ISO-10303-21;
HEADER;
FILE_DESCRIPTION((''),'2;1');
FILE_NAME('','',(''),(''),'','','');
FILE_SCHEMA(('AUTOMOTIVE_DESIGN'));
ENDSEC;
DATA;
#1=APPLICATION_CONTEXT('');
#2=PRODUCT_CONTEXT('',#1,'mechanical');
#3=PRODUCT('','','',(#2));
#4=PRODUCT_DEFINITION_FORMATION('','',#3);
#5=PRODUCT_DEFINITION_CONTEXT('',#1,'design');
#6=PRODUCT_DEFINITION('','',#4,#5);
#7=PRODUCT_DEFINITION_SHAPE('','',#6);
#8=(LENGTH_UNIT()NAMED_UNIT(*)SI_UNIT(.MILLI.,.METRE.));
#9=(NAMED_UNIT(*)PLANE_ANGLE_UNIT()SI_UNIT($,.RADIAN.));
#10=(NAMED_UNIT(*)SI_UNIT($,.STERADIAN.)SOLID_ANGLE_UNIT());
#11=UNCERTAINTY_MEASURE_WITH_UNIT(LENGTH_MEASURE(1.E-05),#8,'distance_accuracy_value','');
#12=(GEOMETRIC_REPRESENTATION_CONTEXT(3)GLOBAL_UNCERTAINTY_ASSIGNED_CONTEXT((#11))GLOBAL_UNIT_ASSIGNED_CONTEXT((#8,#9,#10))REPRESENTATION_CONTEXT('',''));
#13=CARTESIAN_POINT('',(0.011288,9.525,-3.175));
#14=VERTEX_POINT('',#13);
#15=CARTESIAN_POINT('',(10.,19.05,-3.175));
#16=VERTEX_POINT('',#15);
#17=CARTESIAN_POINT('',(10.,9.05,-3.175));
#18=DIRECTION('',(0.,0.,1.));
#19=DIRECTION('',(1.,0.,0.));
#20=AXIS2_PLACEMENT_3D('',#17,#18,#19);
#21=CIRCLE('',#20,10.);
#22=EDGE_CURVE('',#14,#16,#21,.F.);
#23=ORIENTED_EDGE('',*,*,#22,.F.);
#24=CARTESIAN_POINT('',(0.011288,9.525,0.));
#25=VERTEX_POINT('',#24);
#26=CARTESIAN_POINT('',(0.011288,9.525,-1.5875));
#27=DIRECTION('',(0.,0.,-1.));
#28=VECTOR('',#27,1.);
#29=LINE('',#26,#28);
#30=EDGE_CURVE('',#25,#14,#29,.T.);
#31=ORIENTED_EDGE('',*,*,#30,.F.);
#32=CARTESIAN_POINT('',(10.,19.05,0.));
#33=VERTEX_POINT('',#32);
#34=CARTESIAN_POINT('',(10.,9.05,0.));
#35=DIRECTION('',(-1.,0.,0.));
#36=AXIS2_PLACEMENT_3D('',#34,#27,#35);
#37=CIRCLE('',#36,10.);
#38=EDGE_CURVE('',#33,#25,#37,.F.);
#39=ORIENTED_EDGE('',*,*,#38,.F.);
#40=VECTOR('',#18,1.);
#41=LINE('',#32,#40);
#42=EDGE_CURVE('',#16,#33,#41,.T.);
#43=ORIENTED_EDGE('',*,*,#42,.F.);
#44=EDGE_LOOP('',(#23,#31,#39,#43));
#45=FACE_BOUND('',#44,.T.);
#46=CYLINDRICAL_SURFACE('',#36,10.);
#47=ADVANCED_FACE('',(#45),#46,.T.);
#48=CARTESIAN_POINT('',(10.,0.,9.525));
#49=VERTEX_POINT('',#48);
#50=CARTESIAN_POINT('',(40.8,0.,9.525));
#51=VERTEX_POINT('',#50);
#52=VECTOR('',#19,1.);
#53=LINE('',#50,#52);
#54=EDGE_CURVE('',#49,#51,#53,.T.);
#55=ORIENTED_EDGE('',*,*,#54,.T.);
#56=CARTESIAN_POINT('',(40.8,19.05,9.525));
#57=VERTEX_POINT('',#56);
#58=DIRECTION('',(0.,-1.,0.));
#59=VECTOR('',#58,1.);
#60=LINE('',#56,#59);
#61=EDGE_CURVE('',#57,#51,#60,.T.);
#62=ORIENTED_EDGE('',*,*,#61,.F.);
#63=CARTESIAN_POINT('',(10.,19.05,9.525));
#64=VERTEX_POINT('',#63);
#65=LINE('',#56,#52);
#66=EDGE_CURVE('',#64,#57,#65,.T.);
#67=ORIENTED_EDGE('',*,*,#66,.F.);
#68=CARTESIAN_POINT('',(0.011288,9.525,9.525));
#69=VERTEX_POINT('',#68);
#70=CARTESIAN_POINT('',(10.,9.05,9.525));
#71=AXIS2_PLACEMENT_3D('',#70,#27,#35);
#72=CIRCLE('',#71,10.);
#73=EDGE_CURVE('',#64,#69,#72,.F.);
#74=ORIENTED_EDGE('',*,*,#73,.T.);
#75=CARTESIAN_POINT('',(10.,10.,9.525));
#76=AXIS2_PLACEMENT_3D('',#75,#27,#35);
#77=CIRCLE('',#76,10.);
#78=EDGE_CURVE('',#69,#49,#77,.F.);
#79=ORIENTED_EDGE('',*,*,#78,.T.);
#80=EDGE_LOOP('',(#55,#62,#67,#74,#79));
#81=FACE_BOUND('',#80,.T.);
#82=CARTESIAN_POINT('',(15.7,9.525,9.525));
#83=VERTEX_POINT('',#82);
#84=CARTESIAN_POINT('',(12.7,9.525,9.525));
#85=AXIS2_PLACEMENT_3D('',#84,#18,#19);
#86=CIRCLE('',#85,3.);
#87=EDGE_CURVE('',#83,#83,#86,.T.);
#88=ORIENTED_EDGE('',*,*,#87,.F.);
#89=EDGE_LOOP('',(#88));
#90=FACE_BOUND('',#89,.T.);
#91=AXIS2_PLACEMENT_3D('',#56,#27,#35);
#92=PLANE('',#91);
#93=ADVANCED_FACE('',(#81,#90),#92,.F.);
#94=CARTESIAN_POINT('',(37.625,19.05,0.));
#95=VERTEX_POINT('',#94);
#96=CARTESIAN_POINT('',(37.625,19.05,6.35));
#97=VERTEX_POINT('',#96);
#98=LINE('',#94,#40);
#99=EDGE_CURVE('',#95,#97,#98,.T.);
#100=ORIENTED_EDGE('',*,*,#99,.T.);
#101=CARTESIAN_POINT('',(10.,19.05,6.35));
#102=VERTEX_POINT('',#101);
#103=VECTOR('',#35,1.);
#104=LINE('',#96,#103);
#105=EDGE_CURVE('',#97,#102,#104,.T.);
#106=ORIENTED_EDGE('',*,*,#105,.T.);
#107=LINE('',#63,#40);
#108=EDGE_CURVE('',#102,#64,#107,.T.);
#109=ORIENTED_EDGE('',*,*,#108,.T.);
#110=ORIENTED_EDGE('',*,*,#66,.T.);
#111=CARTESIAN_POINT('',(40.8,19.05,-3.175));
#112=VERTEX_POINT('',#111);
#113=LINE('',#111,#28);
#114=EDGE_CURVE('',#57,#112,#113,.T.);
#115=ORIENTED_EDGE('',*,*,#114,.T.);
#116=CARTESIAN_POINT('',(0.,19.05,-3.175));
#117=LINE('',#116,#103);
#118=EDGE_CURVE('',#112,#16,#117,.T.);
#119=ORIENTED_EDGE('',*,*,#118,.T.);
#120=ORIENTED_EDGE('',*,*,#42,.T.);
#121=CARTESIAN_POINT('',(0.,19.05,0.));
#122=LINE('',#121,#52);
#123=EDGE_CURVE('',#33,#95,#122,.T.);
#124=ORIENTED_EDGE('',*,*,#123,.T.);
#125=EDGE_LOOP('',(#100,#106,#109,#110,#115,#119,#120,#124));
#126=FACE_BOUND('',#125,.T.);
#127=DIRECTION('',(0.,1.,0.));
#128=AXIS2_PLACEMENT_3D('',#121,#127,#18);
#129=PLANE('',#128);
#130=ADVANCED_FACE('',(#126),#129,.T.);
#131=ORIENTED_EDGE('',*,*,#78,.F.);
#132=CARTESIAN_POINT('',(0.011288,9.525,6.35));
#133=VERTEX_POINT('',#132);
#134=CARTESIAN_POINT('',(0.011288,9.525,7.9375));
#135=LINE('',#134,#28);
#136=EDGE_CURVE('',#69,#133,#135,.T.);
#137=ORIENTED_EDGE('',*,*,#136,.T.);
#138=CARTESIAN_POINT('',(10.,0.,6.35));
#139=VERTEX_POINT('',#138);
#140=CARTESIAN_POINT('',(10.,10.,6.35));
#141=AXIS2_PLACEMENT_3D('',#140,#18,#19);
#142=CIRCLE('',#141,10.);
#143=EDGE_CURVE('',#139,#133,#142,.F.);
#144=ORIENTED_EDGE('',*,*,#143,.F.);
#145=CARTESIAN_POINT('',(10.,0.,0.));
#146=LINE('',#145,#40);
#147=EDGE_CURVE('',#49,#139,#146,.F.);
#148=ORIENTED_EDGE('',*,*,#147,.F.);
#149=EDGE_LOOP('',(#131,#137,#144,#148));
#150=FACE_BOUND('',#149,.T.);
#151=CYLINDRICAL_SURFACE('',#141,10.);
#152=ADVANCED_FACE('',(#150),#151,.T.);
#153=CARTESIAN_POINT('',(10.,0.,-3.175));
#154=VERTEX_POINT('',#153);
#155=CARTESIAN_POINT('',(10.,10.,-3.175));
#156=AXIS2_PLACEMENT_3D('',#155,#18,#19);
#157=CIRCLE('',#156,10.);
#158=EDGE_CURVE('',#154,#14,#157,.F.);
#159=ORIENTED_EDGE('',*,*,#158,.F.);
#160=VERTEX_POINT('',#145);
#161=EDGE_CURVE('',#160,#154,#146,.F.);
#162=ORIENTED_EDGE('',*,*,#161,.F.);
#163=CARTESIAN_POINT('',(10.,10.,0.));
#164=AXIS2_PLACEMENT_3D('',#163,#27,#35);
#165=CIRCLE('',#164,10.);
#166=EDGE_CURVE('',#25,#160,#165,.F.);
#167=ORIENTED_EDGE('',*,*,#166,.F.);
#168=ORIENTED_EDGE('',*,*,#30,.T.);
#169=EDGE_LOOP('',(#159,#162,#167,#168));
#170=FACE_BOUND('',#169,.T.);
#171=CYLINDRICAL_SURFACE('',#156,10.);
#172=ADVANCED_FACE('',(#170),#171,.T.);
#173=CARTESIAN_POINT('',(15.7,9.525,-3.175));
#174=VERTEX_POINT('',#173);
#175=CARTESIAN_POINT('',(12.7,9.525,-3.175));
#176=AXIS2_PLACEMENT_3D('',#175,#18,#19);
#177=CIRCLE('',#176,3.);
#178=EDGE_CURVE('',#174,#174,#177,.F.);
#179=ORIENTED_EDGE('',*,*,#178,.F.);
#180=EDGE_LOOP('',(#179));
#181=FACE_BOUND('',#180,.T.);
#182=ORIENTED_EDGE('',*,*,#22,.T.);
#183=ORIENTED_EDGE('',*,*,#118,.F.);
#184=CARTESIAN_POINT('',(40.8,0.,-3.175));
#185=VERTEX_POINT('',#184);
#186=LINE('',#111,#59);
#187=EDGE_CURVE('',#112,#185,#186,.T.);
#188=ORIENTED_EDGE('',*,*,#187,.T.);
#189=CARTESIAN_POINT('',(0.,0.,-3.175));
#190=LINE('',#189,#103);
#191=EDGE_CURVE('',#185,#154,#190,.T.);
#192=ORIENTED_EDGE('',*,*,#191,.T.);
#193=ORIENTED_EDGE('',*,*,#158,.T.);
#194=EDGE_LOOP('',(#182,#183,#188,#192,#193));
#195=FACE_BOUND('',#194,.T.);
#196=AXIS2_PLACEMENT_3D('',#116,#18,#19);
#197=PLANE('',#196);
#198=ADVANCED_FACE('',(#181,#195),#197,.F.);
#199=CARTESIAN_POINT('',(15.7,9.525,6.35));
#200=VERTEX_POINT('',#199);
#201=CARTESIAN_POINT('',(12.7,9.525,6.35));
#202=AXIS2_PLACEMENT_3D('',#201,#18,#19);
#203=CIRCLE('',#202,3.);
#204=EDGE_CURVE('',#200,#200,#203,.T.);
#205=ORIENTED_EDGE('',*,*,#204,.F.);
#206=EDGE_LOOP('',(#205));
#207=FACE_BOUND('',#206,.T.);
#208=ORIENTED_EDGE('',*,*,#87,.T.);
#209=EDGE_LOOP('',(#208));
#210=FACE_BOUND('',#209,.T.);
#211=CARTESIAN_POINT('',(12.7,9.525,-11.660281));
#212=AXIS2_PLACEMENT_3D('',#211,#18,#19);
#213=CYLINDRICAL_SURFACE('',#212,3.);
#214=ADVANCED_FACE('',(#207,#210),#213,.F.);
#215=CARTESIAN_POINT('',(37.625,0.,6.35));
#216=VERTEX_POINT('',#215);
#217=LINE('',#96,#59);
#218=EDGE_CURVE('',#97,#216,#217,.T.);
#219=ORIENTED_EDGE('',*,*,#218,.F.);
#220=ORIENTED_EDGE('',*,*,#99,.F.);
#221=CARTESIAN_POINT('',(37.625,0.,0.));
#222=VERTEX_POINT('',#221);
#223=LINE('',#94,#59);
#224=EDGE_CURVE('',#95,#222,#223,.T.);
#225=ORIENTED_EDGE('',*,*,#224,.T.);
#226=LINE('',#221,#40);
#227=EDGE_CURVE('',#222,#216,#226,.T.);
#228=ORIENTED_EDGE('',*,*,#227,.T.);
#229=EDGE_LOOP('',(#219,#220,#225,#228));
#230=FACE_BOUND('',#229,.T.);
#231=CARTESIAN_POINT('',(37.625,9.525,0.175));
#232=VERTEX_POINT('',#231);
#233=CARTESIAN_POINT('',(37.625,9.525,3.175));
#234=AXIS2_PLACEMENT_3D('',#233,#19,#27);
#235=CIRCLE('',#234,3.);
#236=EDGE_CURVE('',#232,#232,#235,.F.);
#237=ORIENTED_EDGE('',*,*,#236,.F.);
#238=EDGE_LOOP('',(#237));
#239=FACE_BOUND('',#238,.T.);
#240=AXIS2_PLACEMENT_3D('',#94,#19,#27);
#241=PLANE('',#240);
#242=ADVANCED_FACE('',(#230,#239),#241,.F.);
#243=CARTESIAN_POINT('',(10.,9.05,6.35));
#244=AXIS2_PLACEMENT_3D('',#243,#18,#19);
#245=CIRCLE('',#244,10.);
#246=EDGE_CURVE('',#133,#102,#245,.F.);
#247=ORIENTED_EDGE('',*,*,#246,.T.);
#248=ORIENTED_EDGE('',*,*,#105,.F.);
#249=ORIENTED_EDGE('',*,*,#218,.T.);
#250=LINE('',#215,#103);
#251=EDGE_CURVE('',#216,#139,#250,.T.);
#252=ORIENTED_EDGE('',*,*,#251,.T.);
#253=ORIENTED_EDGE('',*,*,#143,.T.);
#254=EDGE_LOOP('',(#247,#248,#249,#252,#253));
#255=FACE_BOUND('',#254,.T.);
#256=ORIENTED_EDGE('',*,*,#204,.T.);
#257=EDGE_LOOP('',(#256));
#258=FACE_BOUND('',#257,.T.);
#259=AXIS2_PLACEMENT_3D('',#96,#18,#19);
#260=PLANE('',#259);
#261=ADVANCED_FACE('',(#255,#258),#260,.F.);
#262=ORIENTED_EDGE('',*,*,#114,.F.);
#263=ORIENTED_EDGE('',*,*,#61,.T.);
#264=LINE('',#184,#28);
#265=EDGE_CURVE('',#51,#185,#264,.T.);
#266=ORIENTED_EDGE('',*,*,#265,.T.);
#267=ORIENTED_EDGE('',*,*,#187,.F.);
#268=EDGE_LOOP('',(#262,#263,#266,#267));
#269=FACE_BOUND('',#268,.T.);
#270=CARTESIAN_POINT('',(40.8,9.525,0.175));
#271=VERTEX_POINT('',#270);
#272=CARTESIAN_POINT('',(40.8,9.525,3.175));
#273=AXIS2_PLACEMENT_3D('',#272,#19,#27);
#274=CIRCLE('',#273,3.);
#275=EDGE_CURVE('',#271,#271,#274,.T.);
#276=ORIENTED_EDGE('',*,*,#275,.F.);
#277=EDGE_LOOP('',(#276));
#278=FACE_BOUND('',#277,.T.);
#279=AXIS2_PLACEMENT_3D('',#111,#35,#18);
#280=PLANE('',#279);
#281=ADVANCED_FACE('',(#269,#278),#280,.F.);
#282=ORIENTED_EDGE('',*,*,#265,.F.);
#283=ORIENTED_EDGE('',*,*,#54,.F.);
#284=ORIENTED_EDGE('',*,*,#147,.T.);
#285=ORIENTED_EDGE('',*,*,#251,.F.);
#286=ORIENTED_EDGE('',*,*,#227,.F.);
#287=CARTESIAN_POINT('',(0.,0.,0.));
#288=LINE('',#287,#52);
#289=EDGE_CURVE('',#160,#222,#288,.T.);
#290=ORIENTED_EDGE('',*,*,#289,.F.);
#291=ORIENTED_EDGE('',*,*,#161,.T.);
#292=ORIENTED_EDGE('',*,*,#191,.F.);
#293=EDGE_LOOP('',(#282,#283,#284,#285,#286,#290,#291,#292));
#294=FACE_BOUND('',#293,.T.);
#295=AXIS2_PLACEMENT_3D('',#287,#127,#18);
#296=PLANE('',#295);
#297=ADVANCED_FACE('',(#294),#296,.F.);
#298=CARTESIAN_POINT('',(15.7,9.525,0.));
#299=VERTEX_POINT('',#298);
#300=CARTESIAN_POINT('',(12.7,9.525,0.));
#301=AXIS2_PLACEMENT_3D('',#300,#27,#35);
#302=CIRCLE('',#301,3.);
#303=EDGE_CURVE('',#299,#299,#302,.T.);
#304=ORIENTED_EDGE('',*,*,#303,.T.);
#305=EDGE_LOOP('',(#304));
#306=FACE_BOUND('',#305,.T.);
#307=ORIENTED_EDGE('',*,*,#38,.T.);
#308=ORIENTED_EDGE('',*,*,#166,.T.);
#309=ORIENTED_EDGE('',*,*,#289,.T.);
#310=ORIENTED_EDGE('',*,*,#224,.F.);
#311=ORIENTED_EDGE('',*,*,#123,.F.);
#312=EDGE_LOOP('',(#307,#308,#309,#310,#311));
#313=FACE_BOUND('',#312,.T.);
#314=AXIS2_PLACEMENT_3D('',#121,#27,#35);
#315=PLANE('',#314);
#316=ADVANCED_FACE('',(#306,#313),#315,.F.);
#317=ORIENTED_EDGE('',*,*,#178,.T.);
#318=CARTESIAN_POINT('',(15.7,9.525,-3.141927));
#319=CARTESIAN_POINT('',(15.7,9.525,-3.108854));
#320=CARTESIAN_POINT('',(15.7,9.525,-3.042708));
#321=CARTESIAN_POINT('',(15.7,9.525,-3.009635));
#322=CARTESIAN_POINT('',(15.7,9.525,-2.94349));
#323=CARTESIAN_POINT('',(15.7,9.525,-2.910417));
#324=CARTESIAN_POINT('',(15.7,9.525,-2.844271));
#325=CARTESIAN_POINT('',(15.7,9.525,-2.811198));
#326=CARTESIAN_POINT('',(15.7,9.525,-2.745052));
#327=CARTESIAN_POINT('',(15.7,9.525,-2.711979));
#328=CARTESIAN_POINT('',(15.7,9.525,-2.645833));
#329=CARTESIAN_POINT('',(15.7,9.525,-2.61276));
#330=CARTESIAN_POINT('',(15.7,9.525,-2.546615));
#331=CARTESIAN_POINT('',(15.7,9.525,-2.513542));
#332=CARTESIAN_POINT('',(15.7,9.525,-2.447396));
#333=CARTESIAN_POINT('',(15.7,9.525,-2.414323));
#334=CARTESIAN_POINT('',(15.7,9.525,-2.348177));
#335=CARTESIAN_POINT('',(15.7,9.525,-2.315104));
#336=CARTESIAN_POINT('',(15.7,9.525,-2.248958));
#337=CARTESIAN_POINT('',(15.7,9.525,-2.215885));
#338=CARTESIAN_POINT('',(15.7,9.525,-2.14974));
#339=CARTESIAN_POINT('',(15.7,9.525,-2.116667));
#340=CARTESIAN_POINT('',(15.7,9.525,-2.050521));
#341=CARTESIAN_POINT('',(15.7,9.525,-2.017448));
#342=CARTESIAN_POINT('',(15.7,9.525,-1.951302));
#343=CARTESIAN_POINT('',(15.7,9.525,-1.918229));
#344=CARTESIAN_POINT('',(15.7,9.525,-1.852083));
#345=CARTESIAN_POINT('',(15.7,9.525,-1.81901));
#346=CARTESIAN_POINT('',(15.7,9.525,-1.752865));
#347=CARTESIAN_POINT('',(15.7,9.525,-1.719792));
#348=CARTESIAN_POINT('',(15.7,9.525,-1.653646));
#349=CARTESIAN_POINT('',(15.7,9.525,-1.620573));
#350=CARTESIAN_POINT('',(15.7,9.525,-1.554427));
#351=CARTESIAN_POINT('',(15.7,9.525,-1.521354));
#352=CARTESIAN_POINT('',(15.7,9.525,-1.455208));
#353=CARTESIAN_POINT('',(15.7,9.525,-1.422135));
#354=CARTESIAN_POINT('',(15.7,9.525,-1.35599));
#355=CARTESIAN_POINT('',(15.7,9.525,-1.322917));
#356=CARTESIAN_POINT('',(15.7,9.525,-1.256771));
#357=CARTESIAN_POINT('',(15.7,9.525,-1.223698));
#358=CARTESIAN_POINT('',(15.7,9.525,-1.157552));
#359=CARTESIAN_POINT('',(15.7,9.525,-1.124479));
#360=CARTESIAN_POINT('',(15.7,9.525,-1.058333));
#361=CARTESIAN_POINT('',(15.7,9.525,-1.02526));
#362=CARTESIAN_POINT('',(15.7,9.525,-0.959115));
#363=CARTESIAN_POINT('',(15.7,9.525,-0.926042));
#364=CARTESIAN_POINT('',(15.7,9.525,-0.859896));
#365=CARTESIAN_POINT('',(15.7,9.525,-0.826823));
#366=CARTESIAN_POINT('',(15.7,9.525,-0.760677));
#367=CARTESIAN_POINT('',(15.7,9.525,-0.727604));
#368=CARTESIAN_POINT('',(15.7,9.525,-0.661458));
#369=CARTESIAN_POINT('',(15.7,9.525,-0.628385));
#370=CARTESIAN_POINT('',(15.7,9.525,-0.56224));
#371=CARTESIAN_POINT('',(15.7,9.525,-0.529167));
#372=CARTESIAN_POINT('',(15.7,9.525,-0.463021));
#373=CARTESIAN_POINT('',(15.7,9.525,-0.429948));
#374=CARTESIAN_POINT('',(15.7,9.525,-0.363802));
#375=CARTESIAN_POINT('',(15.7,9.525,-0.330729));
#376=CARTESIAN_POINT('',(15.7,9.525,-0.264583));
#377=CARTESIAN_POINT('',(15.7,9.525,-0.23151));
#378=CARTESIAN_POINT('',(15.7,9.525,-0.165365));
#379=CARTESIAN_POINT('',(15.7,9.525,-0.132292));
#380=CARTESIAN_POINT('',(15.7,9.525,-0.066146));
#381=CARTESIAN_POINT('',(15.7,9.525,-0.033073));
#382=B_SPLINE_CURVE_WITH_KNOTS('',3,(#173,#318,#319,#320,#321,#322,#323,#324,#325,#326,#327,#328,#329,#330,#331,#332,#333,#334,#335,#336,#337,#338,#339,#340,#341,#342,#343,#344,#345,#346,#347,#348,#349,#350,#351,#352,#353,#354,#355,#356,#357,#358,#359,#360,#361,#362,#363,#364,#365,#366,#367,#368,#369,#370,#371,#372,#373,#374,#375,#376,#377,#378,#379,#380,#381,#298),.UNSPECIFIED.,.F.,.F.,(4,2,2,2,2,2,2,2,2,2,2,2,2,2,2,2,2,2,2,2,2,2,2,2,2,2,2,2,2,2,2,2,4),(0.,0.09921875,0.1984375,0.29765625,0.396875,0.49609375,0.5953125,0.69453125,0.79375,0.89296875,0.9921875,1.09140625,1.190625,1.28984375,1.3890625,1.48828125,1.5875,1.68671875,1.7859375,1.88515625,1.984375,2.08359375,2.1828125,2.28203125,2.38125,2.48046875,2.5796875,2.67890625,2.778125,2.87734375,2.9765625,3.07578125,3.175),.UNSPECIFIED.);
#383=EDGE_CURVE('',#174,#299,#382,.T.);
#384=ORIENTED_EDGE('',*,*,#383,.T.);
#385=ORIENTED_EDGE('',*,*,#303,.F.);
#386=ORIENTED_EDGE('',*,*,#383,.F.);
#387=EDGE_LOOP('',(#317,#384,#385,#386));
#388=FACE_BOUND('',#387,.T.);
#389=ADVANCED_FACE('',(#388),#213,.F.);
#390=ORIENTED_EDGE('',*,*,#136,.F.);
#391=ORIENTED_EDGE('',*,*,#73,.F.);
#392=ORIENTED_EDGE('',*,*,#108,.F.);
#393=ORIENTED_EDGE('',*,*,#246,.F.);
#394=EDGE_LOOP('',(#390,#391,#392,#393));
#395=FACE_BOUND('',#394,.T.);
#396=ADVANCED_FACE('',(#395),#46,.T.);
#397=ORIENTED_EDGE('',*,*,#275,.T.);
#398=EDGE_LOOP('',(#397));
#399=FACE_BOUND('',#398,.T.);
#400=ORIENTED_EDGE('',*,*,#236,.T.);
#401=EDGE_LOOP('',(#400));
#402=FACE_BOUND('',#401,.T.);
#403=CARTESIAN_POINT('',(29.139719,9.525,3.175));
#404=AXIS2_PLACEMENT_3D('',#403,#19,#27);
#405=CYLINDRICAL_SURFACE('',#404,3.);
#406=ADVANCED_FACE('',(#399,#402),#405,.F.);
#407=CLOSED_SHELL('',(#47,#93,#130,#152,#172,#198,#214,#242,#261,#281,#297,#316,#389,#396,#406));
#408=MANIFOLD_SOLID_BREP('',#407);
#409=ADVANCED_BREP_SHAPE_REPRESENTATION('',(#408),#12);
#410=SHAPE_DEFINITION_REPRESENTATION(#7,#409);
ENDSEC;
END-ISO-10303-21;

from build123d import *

# Parameters (mm, degrees)
BOSS_EXTRUDE1_DEPTH = 19.05
SKETCH2_R           = 3
CUT_EXTRUDE1_DEPTH  = 3.175
CUT_EXTRUDE2_REACH  = 48.785
SKETCH3_R           = 3
FILLET1_R           = 10


with BuildPart() as part:
    # Sketch1 → Boss-Extrude1 (new body)
    with BuildSketch(Plane(origin=(0, 0, 0), x_dir=(1, 0, 0), z_dir=(0, 1, 0))):
        Polygon((0, 0), (37.625, 0), (37.625, -6.35), (0, -6.35), (0, -9.525), (40.8, -9.525), (40.8, 3.175), (0, 3.175), align=None)
    extrude(amount=BOSS_EXTRUDE1_DEPTH)

    # Sketch2 → Cut-Extrude1 (cut)
    with BuildSketch(Plane(origin=(40.8, 0, 0), x_dir=(0, 0, -1), z_dir=(1, 0, 0))):
        with Locations((-3.175, 9.525)):
            Circle(SKETCH2_R)
    extrude(amount=-CUT_EXTRUDE1_DEPTH, mode=Mode.SUBTRACT)

    # Cut-Extrude2: up to this face of the body (flat: up to its plane)
    cut_extrude2_end = Plane(part.part.faces().sort_by_distance((20.4, 9.525, -3.175))[0])
    # Sketch3 → Cut-Extrude2 (cut, up to the picked face)
    with BuildSketch(Plane.XY.offset(9.525), mode=Mode.PRIVATE) as cut_extrude2_sk1:
        with Locations((12.7, 9.525)):
            Circle(SKETCH3_R)
    cut_extrude2_tool1 = split(extrude(cut_extrude2_sk1.sketch, amount=-CUT_EXTRUDE2_REACH, mode=Mode.PRIVATE), bisect_by=cut_extrude2_end, keep=Keep.BOTH, mode=Mode.PRIVATE)
    add(cut_extrude2_tool1.solids().sort_by(Axis((12.7, 9.525, 9.525), (0, 0, -1)))[0], mode=Mode.SUBTRACT)

    # Fillet1
    # the kernel refuses this fillet: 10 mm, written as the material it takes off along each edge
    with BuildSketch(Plane(origin=(0, 0, -28.175), x_dir=(0, 1, 0), z_dir=(0, 0, 1)), Plane(origin=(0, 19.05, -18.65), x_dir=(1, 0, 0), z_dir=(0, 0, 1))) as fillet1_piece_1:
        with BuildLine():
            CenterArc((FILLET1_R, -FILLET1_R), FILLET1_R, 90, 90)
            Line((0, -FILLET1_R), (0, 0))
            Line((0, 0), (FILLET1_R, 0))
        make_face()
    extrude(amount=53.175, mode=Mode.SUBTRACT)
    with BuildSketch(Plane(origin=(0, 19.05, -28.175), x_dir=(0, -1, 0), z_dir=(0, 0, 1)), Plane(origin=(0, 0, -18.65), x_dir=(1, 0, 0), z_dir=(0, 0, 1))) as fillet1_piece_2:
        with BuildLine():
            CenterArc((FILLET1_R, FILLET1_R), FILLET1_R, 180, 90)
            Line((0, FILLET1_R), (0, 0))
            Line((0, 0), (FILLET1_R, 0))
        make_face()
    extrude(amount=53.175, mode=Mode.SUBTRACT)


solid = part.part
